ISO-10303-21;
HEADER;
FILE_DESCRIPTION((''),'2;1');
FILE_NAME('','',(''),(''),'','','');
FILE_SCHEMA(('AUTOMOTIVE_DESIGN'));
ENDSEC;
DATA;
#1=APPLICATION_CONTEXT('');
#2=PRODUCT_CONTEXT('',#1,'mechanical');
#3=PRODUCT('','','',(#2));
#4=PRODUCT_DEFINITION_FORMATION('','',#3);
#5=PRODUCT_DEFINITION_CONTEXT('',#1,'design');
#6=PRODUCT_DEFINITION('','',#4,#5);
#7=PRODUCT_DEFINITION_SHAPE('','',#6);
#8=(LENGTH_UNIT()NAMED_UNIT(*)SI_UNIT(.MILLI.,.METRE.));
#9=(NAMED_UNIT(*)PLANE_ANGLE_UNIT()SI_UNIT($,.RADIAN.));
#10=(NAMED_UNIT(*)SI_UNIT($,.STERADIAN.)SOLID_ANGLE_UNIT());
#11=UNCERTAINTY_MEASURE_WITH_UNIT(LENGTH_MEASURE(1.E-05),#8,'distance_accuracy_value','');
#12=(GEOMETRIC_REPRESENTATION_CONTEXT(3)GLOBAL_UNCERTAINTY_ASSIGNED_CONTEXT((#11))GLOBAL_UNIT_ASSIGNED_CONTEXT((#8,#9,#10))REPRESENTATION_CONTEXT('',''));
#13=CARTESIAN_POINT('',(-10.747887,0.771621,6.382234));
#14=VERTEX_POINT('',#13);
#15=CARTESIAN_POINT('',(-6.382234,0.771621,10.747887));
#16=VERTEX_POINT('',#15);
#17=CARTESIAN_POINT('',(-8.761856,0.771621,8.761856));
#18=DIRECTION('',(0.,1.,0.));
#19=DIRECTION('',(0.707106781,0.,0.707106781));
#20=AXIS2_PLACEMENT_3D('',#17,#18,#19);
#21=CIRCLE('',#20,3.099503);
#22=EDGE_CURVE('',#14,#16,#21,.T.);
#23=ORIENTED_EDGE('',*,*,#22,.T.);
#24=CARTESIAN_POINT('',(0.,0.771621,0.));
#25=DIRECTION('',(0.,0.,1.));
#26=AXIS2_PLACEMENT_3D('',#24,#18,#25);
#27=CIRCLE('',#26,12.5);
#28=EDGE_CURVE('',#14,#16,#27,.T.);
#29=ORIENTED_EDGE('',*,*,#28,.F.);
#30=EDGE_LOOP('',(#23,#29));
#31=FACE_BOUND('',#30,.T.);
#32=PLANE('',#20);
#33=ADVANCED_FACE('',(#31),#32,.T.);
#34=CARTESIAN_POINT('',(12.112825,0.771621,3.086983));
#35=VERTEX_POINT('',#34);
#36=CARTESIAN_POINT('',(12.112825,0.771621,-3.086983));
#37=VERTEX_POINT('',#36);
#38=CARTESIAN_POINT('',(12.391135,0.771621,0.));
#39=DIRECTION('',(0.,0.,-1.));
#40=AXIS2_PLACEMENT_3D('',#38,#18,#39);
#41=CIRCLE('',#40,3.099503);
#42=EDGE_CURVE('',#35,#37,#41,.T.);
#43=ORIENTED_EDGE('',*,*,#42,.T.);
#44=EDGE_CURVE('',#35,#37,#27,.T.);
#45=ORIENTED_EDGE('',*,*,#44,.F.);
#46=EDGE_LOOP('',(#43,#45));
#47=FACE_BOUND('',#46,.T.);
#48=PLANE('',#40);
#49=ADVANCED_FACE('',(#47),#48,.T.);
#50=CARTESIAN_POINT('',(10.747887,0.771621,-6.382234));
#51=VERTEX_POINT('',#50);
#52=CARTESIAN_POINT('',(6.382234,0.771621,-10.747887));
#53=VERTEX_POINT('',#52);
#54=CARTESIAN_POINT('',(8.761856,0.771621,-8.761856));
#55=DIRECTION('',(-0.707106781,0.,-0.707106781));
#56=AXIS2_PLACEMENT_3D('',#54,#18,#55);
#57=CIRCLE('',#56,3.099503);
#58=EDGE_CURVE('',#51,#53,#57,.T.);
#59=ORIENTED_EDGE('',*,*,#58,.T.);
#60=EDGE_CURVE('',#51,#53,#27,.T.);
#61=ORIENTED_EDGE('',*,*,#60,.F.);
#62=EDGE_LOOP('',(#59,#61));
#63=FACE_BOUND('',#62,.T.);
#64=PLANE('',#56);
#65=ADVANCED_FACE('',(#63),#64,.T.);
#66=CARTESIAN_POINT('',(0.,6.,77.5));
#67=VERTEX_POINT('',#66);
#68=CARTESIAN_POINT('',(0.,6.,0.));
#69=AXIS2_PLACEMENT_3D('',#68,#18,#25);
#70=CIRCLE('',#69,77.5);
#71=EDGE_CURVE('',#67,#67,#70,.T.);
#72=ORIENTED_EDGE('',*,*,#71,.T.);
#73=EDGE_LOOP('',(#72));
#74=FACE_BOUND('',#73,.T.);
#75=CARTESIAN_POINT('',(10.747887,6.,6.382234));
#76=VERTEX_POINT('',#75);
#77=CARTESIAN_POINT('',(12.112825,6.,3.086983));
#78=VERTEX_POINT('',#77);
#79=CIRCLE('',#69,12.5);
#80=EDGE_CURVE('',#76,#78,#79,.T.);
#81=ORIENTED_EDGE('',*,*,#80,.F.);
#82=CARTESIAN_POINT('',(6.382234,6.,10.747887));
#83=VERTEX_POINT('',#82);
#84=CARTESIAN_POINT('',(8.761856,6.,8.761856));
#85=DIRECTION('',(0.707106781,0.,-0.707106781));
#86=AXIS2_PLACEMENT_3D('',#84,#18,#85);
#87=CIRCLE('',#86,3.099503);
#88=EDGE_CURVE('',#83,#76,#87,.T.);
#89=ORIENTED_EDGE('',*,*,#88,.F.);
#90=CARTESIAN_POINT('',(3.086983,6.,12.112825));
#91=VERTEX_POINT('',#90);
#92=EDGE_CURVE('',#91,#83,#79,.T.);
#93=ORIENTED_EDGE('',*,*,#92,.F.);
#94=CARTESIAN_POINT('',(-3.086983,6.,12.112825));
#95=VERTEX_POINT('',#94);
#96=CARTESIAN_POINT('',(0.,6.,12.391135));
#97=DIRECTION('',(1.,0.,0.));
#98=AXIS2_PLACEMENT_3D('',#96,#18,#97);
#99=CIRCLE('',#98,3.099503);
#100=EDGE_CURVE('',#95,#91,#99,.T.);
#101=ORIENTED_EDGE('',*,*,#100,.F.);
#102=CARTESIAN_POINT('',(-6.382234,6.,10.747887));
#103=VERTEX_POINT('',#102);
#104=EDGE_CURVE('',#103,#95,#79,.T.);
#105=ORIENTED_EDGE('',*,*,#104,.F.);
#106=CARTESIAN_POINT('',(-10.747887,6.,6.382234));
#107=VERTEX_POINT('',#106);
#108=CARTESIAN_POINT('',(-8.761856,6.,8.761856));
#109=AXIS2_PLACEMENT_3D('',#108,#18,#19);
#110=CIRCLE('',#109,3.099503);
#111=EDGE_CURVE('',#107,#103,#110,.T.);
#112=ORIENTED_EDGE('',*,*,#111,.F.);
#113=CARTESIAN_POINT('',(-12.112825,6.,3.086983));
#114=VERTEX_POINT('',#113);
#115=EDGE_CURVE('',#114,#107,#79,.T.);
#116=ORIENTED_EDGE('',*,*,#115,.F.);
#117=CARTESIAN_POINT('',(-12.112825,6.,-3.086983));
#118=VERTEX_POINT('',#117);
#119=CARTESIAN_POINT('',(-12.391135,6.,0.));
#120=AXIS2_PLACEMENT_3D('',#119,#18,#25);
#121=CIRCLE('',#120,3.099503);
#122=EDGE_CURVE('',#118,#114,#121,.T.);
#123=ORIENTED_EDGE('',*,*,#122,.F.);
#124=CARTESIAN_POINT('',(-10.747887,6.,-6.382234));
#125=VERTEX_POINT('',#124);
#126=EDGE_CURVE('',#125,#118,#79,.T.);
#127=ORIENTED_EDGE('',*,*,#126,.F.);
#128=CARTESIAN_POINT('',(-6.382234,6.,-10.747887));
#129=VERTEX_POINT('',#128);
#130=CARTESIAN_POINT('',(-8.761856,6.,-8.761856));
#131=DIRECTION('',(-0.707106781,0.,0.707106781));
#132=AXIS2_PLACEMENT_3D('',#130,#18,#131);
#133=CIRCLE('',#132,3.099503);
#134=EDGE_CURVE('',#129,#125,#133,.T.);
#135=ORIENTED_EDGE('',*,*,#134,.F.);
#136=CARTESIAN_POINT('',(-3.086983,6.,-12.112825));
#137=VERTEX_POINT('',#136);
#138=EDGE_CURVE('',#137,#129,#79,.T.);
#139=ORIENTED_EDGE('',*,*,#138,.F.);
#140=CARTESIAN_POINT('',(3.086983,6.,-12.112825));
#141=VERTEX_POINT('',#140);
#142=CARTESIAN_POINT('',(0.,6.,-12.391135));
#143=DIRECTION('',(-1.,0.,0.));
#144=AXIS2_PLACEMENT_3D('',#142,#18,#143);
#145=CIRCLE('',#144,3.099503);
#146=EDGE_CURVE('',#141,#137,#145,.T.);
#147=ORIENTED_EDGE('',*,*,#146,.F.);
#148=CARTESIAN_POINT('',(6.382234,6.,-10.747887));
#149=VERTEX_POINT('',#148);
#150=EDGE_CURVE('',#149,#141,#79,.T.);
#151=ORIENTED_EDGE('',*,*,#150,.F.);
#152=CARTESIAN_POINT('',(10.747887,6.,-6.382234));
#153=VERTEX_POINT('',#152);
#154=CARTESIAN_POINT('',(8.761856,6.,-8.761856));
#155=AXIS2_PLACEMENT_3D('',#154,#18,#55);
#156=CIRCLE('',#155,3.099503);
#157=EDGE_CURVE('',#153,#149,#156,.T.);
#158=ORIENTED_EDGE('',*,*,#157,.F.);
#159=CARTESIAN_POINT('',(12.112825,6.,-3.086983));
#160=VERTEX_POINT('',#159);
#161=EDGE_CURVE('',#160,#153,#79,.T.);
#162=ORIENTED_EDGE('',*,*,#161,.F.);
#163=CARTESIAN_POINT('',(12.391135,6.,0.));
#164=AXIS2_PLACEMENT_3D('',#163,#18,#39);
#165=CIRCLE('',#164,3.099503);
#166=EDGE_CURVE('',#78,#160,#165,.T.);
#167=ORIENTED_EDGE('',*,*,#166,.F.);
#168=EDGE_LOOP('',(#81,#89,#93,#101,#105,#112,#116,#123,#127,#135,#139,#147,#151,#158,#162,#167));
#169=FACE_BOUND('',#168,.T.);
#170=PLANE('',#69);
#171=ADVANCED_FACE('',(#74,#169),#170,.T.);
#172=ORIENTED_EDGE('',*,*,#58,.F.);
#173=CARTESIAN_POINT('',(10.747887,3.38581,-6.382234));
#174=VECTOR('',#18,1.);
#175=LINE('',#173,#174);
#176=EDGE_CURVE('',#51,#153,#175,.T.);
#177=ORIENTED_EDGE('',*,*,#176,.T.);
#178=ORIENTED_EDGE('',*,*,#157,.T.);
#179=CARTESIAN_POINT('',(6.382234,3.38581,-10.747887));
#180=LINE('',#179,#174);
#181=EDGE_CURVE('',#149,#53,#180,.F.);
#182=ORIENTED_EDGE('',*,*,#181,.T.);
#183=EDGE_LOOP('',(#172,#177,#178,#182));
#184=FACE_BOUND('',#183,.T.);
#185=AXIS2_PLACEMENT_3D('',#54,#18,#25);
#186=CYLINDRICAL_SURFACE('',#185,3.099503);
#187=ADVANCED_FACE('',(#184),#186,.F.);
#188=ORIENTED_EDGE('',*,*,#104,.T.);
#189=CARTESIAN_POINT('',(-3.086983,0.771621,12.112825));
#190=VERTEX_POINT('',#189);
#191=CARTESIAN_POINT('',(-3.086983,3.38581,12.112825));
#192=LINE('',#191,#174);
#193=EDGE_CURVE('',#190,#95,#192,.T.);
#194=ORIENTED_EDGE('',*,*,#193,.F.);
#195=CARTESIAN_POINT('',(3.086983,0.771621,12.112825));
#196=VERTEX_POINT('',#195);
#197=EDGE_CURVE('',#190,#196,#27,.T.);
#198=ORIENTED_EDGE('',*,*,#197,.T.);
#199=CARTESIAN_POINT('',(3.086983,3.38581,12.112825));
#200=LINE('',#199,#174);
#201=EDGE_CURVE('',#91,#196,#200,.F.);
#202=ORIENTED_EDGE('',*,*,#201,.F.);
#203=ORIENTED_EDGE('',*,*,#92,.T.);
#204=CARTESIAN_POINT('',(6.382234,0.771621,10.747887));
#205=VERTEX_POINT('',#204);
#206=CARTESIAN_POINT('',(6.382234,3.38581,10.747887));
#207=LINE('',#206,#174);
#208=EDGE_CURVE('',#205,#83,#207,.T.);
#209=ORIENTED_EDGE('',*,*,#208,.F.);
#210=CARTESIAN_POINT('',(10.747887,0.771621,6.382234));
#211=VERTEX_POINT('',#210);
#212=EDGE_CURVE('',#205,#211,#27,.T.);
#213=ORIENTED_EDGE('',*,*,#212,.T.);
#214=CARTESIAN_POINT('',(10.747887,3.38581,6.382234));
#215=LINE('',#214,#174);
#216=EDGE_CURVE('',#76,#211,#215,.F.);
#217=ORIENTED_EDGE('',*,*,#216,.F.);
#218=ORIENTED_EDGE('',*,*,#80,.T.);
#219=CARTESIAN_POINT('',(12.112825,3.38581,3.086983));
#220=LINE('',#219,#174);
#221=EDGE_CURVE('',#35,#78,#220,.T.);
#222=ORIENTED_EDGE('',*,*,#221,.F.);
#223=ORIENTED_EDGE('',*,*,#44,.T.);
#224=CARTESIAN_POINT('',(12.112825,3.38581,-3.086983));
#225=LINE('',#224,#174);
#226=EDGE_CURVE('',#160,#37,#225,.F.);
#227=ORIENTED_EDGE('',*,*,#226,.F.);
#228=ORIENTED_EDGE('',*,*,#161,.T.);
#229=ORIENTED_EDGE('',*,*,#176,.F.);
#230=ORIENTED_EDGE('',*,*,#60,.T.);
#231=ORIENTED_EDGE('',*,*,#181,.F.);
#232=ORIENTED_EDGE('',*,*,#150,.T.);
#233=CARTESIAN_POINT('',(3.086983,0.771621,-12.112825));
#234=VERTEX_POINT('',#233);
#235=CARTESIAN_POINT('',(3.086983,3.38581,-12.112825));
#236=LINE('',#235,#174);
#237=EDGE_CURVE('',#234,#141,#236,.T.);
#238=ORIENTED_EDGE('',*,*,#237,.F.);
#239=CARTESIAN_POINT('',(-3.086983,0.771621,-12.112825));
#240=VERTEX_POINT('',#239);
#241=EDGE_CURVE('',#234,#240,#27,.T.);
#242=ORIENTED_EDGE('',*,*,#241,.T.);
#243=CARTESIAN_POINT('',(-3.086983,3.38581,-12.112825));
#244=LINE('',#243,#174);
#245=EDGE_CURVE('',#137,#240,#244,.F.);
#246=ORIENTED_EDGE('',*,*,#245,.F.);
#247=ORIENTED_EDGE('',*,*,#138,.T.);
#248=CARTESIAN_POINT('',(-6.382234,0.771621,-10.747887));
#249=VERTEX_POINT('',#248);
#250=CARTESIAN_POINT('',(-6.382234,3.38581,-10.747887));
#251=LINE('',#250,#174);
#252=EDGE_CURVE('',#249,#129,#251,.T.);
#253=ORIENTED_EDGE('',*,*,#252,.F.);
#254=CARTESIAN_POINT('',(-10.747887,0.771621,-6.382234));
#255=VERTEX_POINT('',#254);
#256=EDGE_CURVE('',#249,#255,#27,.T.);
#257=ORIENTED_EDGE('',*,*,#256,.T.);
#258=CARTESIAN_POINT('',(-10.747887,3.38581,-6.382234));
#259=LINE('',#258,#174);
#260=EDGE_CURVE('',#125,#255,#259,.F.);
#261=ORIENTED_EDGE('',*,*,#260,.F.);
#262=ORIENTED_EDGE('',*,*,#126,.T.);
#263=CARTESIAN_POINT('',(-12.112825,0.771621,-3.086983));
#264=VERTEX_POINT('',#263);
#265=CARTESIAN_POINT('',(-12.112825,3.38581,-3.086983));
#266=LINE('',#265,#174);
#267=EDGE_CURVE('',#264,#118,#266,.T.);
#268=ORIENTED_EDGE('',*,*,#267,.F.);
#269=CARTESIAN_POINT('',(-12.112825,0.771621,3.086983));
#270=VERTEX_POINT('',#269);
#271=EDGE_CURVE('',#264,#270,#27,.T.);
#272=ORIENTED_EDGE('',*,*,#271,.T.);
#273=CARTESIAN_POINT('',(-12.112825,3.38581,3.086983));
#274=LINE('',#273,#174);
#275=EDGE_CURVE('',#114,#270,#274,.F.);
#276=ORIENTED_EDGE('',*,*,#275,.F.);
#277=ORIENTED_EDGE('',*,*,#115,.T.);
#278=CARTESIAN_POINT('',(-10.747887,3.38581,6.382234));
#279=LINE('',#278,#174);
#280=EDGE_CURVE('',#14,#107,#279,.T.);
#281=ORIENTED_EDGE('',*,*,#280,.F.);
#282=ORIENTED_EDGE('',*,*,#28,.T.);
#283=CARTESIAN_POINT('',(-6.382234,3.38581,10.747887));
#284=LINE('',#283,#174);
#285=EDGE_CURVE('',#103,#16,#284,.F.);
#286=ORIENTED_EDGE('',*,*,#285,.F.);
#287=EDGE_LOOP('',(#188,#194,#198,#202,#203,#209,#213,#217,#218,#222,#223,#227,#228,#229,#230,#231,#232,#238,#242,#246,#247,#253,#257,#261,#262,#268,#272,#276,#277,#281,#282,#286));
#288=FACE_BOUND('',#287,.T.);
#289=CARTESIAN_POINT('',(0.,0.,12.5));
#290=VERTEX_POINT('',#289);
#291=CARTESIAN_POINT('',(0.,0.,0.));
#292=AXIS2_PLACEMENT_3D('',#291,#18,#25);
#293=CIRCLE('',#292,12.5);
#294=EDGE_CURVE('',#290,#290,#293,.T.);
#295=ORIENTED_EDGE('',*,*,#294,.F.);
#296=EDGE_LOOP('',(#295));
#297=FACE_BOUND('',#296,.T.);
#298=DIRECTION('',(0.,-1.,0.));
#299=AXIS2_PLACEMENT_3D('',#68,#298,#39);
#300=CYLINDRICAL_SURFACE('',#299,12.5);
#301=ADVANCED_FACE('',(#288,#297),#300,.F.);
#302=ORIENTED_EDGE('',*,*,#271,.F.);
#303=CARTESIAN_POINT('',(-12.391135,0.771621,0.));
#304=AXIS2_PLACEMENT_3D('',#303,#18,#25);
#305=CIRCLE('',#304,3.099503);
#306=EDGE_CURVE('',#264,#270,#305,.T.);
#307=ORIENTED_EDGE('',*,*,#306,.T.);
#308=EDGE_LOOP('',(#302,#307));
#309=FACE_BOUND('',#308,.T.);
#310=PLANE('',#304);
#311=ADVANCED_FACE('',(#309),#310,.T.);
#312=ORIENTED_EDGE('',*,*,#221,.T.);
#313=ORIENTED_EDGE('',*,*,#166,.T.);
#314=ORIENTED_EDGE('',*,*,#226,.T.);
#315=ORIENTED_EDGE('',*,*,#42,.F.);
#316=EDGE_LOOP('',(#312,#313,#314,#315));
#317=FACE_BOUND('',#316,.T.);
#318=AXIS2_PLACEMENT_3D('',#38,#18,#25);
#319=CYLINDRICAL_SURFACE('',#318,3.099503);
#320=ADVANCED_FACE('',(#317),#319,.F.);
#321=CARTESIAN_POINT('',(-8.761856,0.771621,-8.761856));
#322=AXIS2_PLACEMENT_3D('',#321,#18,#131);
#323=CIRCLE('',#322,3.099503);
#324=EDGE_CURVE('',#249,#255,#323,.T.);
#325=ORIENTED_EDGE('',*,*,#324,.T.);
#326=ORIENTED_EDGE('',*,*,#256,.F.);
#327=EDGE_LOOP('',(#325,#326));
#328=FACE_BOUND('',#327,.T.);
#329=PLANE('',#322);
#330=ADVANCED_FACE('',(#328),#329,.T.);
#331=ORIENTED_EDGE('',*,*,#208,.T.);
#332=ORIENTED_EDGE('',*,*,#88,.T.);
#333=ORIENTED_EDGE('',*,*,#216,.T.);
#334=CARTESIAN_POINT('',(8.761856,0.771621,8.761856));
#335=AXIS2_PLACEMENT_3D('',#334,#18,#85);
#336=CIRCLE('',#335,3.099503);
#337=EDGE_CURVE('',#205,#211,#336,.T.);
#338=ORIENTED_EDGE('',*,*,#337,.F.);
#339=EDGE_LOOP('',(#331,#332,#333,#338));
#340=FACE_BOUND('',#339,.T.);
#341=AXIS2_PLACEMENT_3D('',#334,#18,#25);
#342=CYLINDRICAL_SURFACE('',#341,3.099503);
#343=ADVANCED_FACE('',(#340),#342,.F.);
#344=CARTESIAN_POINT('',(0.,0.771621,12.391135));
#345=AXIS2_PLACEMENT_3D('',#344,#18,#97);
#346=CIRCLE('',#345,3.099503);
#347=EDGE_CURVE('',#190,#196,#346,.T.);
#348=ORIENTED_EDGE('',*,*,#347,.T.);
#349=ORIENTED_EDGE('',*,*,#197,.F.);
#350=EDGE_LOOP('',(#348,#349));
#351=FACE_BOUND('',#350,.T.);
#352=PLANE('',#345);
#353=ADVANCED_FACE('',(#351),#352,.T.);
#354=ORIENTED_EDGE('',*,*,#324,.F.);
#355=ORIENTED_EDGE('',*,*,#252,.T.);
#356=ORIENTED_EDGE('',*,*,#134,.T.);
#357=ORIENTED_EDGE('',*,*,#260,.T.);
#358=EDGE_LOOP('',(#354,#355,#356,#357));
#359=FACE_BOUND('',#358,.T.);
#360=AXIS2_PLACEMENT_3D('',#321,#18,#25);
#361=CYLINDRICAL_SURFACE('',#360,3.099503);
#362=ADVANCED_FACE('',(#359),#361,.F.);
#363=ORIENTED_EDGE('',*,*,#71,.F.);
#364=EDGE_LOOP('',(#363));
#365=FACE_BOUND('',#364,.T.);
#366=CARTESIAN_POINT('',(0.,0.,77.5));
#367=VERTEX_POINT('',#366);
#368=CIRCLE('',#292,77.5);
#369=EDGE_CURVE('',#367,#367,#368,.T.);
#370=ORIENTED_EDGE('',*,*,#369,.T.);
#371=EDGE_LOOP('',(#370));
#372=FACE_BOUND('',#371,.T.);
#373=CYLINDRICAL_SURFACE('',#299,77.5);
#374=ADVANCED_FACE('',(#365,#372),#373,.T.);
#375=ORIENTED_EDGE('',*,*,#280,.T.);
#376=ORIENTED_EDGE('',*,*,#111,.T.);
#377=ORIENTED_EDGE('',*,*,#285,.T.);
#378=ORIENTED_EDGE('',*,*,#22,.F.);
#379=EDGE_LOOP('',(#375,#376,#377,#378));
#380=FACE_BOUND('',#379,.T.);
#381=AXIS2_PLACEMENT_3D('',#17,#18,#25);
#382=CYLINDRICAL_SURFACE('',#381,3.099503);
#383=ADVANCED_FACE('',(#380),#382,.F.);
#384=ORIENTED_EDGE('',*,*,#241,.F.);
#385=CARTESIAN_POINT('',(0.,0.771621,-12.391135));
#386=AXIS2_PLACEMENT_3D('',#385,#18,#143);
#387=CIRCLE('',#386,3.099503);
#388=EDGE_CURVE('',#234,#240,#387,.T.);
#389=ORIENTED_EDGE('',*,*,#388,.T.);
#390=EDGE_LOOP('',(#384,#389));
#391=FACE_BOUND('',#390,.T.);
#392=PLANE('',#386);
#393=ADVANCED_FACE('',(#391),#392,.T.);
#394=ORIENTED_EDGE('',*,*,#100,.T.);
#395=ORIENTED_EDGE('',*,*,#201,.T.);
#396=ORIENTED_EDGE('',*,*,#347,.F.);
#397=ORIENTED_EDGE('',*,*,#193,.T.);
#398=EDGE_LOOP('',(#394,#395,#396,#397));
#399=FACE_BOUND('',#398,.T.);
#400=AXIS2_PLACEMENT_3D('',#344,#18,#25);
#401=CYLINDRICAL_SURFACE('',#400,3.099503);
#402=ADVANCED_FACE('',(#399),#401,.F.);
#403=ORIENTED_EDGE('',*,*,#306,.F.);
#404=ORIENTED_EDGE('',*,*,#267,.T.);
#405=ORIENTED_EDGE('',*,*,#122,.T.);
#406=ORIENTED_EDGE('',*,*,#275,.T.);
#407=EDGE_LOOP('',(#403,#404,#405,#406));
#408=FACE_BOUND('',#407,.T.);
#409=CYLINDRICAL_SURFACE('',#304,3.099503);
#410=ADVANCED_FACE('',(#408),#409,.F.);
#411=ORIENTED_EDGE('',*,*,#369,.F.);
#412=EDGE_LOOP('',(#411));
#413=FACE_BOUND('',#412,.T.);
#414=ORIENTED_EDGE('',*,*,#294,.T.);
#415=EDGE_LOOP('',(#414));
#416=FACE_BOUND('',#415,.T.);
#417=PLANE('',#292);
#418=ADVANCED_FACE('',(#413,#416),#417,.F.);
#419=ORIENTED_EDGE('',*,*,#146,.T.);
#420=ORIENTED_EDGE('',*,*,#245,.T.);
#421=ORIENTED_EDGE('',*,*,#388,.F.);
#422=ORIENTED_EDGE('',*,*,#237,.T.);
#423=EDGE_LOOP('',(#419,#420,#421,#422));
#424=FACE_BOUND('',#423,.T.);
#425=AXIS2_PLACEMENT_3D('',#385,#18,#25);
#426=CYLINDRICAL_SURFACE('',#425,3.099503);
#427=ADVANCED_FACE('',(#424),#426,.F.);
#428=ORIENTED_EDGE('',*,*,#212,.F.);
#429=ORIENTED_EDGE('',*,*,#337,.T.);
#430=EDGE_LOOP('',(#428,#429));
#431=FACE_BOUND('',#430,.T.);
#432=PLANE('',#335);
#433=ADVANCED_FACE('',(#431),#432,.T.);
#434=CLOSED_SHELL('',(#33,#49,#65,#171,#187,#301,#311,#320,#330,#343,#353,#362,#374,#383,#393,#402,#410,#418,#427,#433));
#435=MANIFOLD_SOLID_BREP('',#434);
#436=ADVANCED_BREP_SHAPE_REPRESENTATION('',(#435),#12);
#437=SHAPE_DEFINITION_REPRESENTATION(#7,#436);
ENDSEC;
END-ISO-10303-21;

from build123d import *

# Parameters (mm, degrees)
SKETCH1_R           = 77.5
BOSS_EXTRUDE1_DEPTH = 6
SKETCH2_R           = 12.5
CUT_EXTRUDE1_DEPTH  = 110.765659475
SKETCH3_R           = 3.099503232
CUT_EXTRUDE2_DEPTH  = 5.228379038
CIRPATTERN1_COUNT   = 8


with BuildPart() as part:
    # Sketch1 → Boss-Extrude1 (new body)
    with BuildSketch(Plane(origin=(0, 0, 0), x_dir=(1, 0, 0), z_dir=(0, 1, 0))):
        Circle(SKETCH1_R)
    extrude(amount=BOSS_EXTRUDE1_DEPTH)

    # Sketch2 → Cut-Extrude1 (cut, through all)
    with BuildSketch(Plane(origin=(0, 0, 0), x_dir=(1, 0, 0), z_dir=(0, 1, 0))):
        Circle(SKETCH2_R)
    extrude(amount=CUT_EXTRUDE1_DEPTH, mode=Mode.SUBTRACT)

    # Sketch3 → Cut-Extrude2 (cut)
    with BuildSketch(Plane(origin=(0, 6, 0), x_dir=(1, 0, 0), z_dir=(0, 1, 0))):
        with Locations((-12.391135016, 0)):
            Circle(SKETCH3_R)
    cut_extrude2 = extrude(amount=-CUT_EXTRUDE2_DEPTH, mode=Mode.SUBTRACT)

    # CirPattern1: Cut-Extrude2 ×8 about axis
    cirpattern1_axis = Axis((0, 0, 0), (0, 1, 0))
    for i in range(1, CIRPATTERN1_COUNT):
        add(cut_extrude2.rotate(cirpattern1_axis, i * 360 / CIRPATTERN1_COUNT), mode=Mode.SUBTRACT)


solid = part.part
